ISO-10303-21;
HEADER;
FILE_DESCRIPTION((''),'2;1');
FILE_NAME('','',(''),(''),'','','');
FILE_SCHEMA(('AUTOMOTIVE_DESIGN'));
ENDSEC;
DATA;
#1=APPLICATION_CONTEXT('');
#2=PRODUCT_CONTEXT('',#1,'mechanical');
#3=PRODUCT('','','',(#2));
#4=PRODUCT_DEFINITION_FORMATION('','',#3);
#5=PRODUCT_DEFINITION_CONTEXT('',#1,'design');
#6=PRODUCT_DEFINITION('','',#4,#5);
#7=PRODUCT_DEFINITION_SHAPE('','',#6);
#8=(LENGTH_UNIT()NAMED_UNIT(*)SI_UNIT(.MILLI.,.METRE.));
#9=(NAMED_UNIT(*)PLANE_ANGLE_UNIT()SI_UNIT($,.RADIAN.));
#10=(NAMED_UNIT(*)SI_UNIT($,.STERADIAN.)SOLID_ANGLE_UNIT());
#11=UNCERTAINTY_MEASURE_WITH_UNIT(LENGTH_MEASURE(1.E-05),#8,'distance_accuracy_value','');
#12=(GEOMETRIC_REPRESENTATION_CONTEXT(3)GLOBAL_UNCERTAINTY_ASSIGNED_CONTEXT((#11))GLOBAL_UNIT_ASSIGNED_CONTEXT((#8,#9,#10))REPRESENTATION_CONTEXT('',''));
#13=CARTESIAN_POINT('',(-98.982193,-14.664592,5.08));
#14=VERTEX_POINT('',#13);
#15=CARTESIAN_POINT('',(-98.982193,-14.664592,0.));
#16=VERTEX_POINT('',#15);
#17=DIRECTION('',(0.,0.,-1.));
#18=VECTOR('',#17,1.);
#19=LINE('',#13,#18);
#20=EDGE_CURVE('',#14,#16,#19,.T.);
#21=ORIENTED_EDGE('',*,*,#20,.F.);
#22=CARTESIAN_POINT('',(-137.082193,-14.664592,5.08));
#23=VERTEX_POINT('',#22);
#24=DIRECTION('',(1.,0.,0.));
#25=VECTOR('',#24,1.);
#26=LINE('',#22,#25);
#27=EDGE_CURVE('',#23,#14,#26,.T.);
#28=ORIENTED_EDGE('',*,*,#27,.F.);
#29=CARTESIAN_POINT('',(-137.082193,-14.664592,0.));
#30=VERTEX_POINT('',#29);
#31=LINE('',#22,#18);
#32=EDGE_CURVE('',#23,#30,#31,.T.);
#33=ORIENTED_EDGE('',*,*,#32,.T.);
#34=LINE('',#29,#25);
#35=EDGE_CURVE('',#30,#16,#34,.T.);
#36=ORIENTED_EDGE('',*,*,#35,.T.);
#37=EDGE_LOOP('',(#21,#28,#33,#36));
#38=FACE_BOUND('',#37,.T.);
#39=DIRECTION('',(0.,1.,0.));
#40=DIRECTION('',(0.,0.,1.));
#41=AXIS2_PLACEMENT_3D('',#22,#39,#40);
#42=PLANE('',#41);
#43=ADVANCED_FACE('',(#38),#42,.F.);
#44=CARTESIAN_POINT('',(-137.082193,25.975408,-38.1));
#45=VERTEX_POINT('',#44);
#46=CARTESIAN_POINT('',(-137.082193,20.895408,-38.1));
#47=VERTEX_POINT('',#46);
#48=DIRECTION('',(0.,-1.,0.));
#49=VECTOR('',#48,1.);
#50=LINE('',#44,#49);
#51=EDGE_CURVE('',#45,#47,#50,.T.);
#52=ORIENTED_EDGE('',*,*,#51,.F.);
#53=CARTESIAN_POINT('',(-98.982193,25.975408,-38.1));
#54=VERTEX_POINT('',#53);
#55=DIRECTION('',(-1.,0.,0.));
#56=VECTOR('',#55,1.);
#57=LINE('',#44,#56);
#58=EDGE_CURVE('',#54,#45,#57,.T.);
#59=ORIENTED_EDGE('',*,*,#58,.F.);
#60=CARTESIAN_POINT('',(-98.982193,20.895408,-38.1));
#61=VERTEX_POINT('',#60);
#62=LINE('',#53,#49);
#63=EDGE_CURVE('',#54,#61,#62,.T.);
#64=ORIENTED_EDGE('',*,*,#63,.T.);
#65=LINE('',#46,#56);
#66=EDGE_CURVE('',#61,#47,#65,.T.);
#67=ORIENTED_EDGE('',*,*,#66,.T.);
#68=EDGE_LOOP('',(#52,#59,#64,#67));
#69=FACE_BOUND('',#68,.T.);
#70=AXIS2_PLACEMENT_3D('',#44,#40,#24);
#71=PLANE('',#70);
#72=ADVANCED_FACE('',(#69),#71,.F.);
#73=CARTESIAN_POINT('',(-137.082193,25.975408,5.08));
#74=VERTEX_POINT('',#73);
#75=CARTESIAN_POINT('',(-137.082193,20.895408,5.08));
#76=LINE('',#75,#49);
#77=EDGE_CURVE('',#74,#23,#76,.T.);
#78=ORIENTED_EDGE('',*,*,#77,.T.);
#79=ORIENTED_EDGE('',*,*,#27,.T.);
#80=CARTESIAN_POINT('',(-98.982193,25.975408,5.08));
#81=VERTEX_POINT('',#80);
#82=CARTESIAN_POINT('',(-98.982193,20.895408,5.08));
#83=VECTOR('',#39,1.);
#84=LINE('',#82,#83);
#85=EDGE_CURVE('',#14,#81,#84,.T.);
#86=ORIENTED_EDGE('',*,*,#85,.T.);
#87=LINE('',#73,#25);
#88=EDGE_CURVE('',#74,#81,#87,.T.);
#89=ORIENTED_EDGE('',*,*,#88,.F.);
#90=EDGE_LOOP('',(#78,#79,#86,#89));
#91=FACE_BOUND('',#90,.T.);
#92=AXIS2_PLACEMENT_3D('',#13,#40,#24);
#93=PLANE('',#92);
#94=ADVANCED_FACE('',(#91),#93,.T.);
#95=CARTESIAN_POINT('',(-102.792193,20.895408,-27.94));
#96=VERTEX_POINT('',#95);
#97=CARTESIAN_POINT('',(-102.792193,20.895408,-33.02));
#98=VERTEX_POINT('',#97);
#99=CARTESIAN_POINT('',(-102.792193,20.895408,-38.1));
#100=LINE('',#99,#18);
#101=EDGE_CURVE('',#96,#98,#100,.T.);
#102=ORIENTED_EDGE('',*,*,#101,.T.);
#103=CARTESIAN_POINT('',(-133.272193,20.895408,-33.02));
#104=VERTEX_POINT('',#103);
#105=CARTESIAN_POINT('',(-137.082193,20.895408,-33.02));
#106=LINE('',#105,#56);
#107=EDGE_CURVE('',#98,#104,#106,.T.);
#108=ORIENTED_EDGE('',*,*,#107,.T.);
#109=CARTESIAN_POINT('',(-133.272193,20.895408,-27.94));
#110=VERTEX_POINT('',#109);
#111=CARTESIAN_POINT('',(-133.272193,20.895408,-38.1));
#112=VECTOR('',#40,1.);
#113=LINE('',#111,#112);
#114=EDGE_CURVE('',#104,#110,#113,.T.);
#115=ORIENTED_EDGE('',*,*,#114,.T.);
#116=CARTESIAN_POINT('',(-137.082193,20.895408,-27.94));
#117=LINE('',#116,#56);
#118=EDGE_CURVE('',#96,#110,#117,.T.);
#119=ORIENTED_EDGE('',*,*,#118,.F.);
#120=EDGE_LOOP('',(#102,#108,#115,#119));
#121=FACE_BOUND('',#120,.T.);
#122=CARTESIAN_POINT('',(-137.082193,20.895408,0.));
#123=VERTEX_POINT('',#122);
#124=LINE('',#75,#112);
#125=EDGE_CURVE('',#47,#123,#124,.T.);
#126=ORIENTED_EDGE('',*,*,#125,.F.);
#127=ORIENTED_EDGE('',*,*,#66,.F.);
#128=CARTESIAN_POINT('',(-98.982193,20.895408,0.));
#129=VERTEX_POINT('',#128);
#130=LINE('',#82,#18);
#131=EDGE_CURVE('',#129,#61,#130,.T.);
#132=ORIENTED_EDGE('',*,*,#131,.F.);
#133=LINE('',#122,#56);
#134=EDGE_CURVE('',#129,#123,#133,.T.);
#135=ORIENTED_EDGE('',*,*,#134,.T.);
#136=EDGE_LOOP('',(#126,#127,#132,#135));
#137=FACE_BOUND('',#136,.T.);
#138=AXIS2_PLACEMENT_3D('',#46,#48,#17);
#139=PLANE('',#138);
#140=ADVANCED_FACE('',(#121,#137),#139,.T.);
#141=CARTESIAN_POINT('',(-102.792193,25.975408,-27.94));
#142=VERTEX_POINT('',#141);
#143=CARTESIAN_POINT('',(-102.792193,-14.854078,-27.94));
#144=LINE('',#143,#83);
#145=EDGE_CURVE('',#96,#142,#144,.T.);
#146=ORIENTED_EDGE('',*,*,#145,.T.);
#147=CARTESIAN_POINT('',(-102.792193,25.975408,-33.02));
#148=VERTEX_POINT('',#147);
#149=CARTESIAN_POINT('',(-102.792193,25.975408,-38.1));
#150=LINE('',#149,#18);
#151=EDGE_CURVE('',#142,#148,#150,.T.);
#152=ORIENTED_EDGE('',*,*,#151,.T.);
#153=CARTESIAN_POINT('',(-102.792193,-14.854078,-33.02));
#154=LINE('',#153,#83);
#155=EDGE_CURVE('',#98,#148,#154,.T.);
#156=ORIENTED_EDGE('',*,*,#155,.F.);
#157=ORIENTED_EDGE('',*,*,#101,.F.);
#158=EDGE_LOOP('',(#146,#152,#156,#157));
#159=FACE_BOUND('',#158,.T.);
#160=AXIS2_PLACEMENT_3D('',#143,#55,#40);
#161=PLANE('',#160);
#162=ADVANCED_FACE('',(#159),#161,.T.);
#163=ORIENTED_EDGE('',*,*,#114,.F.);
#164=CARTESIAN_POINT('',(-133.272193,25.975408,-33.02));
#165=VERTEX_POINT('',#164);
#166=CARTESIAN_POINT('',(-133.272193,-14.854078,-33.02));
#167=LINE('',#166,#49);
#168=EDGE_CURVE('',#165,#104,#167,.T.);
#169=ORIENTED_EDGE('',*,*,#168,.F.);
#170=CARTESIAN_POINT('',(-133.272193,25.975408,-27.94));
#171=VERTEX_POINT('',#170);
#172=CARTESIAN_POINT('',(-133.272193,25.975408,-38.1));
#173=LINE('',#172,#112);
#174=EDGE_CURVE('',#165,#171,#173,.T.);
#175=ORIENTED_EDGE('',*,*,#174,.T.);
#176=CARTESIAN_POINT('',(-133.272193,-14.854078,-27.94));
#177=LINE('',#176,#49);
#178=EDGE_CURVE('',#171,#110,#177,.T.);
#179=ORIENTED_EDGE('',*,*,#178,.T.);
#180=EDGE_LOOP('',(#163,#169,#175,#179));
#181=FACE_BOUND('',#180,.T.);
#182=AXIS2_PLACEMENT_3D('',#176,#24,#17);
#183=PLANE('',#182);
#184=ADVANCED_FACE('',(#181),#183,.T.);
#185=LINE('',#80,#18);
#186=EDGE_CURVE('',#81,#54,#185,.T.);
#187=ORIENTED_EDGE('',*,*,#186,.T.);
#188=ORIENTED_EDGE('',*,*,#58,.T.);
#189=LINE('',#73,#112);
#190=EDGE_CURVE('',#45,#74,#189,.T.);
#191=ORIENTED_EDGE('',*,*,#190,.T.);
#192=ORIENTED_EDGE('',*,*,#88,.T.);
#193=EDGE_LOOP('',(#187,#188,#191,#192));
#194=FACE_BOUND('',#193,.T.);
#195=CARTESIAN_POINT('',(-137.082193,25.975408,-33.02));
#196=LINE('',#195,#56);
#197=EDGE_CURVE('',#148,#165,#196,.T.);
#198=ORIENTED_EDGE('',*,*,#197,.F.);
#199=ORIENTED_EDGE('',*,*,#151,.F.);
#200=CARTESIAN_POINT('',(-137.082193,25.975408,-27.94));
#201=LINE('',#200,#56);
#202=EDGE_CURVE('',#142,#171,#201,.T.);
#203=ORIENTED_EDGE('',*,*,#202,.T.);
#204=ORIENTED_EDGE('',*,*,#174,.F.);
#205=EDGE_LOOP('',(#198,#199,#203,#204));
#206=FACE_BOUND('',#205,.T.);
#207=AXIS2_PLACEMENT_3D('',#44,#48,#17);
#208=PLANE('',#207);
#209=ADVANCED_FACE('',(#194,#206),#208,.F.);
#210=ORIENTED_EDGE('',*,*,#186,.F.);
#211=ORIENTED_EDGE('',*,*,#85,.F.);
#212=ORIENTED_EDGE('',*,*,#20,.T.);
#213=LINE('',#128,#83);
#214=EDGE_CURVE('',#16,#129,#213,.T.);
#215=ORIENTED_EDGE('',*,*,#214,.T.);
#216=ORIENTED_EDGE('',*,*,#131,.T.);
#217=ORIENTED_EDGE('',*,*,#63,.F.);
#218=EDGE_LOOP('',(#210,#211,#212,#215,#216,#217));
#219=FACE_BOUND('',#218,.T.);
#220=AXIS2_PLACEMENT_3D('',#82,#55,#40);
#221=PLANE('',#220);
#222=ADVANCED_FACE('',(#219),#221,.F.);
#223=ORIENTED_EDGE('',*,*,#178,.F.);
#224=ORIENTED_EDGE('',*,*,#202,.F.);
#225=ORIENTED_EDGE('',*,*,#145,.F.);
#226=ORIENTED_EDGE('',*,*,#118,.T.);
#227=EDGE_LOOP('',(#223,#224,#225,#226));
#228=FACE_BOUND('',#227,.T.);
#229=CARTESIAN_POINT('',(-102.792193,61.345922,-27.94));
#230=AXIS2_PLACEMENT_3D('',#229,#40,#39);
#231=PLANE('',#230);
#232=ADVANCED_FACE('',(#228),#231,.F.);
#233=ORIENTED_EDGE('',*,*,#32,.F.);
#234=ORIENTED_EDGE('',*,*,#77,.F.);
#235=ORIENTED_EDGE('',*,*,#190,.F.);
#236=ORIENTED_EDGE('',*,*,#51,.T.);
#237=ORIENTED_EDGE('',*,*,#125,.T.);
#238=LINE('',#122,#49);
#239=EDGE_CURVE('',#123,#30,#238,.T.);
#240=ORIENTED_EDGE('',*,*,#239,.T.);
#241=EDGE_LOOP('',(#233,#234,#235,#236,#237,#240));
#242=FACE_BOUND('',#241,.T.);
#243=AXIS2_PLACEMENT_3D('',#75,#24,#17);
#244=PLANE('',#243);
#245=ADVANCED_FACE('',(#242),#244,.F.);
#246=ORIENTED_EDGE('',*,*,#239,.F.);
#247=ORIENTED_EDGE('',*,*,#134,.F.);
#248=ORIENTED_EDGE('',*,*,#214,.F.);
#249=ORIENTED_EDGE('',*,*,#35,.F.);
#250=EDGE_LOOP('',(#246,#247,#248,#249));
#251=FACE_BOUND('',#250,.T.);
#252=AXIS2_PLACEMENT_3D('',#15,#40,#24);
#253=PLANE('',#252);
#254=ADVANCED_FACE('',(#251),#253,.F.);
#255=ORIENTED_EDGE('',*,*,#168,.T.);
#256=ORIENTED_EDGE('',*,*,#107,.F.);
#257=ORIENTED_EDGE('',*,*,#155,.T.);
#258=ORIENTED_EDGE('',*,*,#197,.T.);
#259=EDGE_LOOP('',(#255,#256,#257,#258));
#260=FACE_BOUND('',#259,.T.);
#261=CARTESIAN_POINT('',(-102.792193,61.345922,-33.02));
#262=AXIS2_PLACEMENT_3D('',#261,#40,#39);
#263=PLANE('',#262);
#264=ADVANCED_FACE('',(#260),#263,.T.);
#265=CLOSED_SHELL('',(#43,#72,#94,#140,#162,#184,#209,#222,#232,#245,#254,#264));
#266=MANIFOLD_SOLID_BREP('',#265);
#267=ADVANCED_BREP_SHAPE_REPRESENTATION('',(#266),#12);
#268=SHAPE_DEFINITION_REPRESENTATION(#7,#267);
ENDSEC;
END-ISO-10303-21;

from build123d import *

# Parameters (mm, degrees)
SKETCH1_W           = 38.1
SKETCH1_H           = 35.56
BOSS_EXTRUDE1_DEPTH = 5.08
SKETCH2_W           = 38.1
SKETCH2_H           = 43.18
BOSS_EXTRUDE2_DEPTH = 5.08
CAVITY2_START       = -133.272192899
CAVITY2_OUTLINE_W   = 5.08
CAVITY2_OUTLINE_H   = 5.08
CAVITY2_DEPTH       = 30.48


# Read off the part's stored shape, not the designer's step: Cavity2
with BuildPart() as part:
    # Sketch1 → Boss-Extrude1 (new body)
    with BuildSketch(Plane.XY):
        with Locations((-118.032192899, 3.115408086)):
            Rectangle(SKETCH1_W, SKETCH1_H)
    extrude(amount=BOSS_EXTRUDE1_DEPTH)

    # Sketch2 → Boss-Extrude2 (add)
    with BuildSketch(Plane(origin=(0, 20.895408086, 0), x_dir=(1, 0, 0), z_dir=(0, 1, 0))):
        with Locations((-118.032192899, 16.51)):
            Rectangle(SKETCH2_W, SKETCH2_H)
    extrude(amount=BOSS_EXTRUDE2_DEPTH)

    # Cavity2 outline → Cavity2 (cut)
    with BuildSketch(Plane.YZ.offset(CAVITY2_START)):
        with Locations((23.435408086, -30.48)):
            Rectangle(CAVITY2_OUTLINE_W, CAVITY2_OUTLINE_H)
    extrude(amount=CAVITY2_DEPTH, mode=Mode.SUBTRACT)


solid = part.part
